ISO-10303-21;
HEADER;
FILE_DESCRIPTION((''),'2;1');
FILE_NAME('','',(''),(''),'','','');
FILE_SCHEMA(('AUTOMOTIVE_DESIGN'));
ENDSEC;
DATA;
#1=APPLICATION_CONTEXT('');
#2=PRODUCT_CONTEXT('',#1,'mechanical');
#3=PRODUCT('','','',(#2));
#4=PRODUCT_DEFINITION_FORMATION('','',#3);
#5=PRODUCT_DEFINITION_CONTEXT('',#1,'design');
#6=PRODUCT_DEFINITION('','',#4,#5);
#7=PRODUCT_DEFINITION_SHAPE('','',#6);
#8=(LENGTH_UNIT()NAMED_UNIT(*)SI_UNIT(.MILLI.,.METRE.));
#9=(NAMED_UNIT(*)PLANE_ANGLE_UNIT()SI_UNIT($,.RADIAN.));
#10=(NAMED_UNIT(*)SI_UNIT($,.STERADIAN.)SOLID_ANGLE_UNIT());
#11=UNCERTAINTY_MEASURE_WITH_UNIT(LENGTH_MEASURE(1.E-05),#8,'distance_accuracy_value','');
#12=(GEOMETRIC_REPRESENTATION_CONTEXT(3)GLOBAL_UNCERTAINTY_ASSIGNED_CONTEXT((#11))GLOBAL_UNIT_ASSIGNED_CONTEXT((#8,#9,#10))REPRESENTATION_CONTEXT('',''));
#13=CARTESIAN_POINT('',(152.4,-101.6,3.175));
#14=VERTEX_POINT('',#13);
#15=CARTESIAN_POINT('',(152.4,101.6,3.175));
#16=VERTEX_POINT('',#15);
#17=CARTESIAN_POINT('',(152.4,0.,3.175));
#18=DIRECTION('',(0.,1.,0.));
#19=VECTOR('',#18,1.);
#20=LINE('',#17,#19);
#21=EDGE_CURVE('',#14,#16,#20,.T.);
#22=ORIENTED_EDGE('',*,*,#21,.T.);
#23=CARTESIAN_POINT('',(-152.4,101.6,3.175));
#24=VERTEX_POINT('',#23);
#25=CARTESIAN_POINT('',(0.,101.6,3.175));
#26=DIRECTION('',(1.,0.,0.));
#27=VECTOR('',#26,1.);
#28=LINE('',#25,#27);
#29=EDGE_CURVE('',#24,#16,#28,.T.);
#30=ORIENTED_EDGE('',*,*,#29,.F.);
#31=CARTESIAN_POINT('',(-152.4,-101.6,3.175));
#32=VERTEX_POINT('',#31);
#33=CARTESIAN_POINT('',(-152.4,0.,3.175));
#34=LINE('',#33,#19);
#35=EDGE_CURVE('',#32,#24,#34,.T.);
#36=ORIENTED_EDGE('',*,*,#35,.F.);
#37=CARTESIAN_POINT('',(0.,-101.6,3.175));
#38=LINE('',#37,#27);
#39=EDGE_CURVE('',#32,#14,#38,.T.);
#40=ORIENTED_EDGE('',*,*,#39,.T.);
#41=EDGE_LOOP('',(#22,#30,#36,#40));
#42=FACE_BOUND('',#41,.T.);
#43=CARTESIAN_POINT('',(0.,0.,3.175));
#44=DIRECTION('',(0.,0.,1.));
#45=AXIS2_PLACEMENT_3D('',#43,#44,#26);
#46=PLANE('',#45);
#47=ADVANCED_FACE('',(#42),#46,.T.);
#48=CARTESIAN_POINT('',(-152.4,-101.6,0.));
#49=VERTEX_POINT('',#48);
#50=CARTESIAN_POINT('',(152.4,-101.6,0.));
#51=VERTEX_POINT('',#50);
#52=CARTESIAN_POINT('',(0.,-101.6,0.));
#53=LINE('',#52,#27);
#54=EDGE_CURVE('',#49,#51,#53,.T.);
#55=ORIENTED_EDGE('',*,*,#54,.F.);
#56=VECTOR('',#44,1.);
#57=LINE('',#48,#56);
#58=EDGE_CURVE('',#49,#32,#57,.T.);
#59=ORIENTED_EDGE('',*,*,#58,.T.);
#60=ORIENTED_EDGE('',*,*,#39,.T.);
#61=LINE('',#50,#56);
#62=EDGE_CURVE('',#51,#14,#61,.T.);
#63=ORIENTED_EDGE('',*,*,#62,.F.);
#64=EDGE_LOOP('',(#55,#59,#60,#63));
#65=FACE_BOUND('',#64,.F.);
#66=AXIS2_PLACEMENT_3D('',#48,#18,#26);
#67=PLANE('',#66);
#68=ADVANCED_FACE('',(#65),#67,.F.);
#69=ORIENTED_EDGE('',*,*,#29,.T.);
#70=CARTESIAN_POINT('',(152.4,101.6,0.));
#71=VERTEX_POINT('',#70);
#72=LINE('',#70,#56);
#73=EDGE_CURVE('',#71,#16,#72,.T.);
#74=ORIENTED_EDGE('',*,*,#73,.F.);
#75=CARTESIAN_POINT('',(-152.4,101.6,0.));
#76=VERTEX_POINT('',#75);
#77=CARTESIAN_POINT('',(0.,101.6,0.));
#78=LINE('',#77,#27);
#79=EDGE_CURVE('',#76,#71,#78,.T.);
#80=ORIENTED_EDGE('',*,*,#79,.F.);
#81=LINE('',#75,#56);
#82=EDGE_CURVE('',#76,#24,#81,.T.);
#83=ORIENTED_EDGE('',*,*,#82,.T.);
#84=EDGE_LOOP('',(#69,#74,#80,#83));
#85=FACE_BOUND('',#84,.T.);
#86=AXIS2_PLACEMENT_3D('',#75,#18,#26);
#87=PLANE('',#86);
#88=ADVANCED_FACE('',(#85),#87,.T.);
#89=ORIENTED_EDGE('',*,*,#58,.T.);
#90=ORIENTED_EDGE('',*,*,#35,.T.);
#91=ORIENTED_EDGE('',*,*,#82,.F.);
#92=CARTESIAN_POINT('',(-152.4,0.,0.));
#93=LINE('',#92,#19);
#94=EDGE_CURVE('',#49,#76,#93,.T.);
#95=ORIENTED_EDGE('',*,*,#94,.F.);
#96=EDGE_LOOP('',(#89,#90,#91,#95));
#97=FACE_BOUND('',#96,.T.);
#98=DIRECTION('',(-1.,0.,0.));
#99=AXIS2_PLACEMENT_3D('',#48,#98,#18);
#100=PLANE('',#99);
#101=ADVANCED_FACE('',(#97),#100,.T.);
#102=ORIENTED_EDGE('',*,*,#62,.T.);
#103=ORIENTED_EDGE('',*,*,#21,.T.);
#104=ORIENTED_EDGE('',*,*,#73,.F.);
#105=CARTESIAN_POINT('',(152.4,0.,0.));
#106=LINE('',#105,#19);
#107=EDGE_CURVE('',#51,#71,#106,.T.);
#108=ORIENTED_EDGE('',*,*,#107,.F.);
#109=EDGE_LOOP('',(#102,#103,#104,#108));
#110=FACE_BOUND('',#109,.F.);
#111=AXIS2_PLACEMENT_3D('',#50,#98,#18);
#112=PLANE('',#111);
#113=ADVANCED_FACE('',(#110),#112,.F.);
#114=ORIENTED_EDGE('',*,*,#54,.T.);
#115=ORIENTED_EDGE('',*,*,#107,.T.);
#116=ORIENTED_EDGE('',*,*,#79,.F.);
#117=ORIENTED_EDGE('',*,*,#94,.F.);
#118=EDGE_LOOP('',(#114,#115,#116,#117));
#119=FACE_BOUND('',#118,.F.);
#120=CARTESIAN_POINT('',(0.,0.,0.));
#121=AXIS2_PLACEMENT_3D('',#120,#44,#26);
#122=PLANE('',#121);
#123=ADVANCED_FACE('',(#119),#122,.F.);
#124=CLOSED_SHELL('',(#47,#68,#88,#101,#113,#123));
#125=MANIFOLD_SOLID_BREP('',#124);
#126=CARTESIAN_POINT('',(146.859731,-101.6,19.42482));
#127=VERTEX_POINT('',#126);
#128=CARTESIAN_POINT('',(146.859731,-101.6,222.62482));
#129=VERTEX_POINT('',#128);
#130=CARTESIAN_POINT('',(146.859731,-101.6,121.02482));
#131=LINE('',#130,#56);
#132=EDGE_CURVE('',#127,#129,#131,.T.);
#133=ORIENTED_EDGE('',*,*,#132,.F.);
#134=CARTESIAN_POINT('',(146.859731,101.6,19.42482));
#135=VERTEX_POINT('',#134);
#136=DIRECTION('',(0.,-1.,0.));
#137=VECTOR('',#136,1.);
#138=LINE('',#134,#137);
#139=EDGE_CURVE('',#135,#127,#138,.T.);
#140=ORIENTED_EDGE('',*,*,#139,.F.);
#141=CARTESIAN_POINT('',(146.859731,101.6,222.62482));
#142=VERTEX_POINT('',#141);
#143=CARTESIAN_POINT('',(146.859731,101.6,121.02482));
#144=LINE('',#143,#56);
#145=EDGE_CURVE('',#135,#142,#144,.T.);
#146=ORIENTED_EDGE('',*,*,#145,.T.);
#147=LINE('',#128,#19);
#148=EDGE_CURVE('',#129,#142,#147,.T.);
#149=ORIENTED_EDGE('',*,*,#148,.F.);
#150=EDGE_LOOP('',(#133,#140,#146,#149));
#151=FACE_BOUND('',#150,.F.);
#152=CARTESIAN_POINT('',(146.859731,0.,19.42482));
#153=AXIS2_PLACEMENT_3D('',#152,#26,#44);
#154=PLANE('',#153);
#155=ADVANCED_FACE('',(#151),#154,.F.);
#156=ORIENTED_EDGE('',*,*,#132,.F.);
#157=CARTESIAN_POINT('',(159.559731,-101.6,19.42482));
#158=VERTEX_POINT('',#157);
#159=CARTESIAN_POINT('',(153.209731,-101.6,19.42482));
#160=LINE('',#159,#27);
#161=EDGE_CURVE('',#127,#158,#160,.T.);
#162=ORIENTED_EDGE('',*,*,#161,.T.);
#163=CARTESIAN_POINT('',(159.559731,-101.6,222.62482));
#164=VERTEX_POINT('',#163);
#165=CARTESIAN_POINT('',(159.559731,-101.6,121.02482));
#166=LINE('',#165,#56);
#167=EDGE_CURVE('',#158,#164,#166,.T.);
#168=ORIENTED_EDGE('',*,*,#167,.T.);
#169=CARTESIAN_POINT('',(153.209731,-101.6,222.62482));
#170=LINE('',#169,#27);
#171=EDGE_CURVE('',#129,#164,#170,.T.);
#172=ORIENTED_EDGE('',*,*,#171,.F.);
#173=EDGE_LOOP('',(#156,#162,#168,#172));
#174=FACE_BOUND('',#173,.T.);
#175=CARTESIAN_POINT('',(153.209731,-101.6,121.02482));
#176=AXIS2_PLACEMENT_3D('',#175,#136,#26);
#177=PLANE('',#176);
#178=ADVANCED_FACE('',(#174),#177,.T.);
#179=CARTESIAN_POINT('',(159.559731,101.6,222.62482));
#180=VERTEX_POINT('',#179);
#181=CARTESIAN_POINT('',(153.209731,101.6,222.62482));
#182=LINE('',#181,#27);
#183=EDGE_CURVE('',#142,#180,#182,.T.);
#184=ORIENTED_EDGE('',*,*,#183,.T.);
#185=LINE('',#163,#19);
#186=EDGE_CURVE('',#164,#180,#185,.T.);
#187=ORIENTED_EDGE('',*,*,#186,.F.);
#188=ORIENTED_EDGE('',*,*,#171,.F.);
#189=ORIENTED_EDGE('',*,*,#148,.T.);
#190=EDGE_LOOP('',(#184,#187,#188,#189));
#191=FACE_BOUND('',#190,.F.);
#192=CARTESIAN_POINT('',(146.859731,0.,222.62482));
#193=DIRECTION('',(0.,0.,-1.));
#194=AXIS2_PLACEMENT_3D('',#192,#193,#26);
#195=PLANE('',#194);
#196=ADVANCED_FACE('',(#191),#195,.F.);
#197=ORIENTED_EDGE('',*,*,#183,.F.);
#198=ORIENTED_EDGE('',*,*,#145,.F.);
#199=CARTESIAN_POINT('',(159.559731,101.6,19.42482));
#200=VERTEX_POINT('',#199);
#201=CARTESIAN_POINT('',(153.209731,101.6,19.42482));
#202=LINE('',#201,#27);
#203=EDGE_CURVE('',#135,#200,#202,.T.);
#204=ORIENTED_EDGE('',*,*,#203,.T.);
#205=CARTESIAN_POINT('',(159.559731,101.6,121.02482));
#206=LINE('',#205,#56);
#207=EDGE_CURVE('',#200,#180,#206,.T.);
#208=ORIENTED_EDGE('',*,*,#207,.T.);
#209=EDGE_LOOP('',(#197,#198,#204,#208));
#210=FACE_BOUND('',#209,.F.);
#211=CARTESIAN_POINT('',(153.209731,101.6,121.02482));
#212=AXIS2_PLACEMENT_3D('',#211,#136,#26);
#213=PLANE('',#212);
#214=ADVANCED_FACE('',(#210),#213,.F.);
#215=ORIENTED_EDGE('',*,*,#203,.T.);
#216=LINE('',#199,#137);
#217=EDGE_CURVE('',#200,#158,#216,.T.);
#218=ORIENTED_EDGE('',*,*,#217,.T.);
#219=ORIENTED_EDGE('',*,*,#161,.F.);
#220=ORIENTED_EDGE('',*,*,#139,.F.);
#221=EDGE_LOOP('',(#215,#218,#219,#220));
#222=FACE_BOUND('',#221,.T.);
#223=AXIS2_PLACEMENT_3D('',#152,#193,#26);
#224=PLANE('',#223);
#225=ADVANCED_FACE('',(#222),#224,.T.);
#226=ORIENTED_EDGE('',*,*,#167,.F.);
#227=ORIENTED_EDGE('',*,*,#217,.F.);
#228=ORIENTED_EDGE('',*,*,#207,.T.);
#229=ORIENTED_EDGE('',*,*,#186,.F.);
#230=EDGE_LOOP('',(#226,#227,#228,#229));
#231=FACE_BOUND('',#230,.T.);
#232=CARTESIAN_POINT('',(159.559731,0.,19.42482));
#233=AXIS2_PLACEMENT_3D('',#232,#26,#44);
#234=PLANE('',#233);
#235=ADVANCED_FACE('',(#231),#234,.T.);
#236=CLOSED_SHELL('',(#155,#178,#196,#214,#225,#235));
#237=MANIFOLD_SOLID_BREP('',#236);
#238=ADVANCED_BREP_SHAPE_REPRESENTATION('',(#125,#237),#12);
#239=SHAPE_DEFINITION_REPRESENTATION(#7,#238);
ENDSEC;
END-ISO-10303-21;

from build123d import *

# Parameters (mm, degrees)
F0_W     = 304.8
F0_H     = 203.2
F1_DEPTH = 3.175
F2_W     = 12.7
F2_H     = 203.2
F3_DEPTH = 101.6


# Not quite as in the source:
# - a feature names something its author has since deleted; it is built from what else it names


with BuildPart() as f1:
    # F0 (on Top) → F1 (new body)
    with BuildSketch(Plane.XY):
        Rectangle(F0_W, F0_H)
    extrude(amount=F1_DEPTH)


with BuildPart() as f3:
    # F2 (on Front) → F3 (new body, symmetric)
    with BuildSketch(Plane.XZ):
        with Locations((153.2097309828, 121.0248197005)):
            Rectangle(F2_W, F2_H)
    extrude(amount=F3_DEPTH, both=True)


solid = Compound([f1.part, f3.part])
